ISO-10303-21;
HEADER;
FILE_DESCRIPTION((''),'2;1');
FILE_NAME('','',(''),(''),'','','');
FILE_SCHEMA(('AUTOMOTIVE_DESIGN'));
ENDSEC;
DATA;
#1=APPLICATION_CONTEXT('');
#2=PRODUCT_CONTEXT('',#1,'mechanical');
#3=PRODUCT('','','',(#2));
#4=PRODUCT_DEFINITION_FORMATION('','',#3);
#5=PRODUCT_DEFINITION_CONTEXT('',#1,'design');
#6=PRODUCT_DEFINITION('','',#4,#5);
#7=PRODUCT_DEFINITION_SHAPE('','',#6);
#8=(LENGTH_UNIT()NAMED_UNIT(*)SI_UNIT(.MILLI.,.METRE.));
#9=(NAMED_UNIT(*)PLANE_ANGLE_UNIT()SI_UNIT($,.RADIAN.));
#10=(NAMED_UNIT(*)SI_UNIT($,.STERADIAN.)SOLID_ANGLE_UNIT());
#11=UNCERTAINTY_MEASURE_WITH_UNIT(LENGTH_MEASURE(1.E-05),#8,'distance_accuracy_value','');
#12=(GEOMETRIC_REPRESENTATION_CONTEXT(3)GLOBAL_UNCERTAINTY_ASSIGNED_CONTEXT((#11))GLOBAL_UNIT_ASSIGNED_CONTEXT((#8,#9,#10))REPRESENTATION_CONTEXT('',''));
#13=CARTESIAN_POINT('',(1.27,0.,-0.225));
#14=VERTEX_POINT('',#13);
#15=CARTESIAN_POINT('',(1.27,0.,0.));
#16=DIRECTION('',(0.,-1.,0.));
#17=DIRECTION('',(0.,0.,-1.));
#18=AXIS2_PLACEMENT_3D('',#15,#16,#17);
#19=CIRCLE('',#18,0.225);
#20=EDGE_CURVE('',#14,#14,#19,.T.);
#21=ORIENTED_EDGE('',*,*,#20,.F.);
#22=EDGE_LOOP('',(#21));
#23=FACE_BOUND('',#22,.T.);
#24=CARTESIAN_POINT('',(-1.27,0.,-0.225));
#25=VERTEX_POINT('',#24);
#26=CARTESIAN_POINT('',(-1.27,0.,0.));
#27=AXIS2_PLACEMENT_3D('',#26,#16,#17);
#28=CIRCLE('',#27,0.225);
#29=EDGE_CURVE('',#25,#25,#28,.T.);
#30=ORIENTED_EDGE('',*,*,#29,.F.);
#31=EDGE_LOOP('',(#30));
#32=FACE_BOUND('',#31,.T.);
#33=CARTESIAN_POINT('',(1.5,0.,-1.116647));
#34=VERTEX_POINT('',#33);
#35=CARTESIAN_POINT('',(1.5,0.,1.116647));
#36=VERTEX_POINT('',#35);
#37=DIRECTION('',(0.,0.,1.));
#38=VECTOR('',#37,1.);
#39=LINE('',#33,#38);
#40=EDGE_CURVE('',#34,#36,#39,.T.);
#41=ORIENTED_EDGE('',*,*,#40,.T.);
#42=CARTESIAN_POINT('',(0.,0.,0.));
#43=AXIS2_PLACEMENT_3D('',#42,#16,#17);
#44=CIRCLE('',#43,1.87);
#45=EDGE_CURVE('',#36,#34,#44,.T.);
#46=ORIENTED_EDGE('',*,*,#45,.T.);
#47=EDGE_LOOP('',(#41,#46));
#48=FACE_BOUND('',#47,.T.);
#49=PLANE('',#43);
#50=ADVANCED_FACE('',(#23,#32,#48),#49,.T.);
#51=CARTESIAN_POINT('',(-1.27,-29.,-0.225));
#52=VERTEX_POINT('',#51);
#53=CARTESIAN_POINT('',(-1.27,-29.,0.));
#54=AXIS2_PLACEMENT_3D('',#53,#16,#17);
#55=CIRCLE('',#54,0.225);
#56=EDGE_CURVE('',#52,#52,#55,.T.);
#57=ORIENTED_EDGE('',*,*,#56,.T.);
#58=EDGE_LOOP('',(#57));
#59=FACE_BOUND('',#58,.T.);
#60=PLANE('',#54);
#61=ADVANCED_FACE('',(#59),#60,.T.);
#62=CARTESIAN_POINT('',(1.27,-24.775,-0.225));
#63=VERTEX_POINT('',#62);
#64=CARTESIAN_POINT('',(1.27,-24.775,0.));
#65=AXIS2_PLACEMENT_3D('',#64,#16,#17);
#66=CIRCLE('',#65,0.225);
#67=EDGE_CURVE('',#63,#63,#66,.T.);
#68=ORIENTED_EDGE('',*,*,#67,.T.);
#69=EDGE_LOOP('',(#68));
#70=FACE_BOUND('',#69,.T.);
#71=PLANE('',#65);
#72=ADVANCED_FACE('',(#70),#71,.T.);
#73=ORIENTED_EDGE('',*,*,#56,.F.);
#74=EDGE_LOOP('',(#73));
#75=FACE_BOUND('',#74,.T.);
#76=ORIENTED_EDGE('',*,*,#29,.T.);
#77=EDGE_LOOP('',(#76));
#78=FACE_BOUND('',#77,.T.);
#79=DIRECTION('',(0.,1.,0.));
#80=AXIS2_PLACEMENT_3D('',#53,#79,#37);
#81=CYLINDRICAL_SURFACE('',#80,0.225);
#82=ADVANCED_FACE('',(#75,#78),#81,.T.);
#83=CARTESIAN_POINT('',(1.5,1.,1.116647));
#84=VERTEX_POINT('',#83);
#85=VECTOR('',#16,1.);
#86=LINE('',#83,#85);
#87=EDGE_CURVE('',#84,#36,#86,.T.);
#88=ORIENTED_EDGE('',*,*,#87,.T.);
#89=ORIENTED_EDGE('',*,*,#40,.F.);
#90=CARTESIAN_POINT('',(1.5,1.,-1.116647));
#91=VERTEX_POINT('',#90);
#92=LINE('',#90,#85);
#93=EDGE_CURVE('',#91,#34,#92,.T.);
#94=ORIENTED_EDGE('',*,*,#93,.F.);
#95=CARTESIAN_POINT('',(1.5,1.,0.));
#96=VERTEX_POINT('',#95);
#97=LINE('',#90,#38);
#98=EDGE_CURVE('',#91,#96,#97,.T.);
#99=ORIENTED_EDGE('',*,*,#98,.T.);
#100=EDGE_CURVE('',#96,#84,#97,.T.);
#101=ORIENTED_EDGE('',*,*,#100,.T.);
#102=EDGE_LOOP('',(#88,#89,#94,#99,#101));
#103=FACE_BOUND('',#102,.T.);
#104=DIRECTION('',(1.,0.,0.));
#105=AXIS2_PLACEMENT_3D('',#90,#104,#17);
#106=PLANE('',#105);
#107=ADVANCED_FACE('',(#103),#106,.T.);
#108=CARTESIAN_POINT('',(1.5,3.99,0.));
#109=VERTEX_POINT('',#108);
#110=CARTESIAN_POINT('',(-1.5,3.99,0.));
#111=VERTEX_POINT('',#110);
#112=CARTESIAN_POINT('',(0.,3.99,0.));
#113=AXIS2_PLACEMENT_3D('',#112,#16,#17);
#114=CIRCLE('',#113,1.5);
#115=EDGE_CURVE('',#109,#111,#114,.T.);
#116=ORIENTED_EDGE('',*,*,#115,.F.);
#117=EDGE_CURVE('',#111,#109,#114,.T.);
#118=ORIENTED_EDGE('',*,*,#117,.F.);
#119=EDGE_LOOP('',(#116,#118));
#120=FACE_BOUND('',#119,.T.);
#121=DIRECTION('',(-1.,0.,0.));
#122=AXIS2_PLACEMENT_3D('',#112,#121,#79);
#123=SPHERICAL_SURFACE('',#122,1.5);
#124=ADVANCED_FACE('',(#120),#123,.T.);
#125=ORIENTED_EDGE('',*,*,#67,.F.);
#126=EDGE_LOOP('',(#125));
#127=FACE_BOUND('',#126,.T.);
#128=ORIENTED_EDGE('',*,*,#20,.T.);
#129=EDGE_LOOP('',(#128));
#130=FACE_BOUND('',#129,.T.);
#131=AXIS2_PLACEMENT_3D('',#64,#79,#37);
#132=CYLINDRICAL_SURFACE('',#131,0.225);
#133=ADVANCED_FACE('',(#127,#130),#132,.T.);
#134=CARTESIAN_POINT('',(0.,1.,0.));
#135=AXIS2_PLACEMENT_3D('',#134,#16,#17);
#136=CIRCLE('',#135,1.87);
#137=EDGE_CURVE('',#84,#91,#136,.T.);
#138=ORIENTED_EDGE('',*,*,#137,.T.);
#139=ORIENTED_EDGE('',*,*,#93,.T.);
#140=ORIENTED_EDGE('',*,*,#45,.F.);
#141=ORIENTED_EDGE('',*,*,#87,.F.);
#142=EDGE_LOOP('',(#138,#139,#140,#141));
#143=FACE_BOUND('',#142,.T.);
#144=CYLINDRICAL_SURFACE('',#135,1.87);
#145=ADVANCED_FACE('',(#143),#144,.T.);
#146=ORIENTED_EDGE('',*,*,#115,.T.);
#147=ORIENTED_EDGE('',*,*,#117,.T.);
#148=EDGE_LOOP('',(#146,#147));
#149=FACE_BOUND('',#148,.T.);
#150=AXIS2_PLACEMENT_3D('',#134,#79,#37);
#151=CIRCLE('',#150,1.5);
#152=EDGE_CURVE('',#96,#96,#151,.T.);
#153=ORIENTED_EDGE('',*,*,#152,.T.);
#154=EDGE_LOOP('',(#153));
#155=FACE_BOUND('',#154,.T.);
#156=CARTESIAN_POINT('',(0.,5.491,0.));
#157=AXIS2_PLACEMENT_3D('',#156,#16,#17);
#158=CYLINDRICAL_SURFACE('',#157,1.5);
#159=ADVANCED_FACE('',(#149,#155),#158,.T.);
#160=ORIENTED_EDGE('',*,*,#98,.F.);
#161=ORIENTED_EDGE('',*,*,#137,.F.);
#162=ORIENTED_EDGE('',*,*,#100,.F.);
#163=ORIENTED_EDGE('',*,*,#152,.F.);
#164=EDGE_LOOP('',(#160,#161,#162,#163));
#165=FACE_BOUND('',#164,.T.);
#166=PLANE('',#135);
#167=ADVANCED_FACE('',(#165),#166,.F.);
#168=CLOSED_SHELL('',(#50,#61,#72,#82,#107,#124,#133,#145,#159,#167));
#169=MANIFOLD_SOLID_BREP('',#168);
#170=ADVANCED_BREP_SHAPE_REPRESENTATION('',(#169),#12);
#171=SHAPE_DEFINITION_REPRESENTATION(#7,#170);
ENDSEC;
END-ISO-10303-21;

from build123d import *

# Parameters (mm, degrees)
RESSALTO_EXTRUS_O1_DEPTH = 1
ESBO_O3_R                = 0.225
RESSALTO_EXTRUS_O3_DEPTH = 29
ESBO_O4_R                = 0.225
RESSALTO_EXTRUS_O4_DEPTH = 24.775


# Read off the part's stored shape, not the designer's step: Ressalto-extrusão2
with BuildPart() as part:
    # Esboço1 → Ressalto-extrusão1 (new body)
    with BuildSketch(Plane.XZ):
        with BuildLine():
            Line((1.5, -1.116646766), (1.5, 1.116646766))
            ThreePointArc((1.5, 1.116646766), (-1.87, 0), (1.5, -1.116646766))
        make_face()
    extrude(amount=-RESSALTO_EXTRUS_O1_DEPTH)

    # Ressalto-extrusão2 outline → Ressalto-extrusão2 (revolve)
    with BuildSketch(Plane.XY):
        with BuildLine():
            Line((1.5, 1), (1.5, 3.99))
            ThreePointArc((1.5, 3.99), (1.060660172, 5.050660172), (0, 5.49))
            Line((0, 5.49), (0, 1))
            Line((0, 1), (1.5, 1))
        make_face()
    revolve(axis=Axis((0, 0, 0), (0, 1, 0)))

    # Esboço3 → Ressalto-extrusão3 (add)
    with BuildSketch(Plane.XZ):
        with Locations(Location((-1.27, 0, 0), (0, 0, 270))):
            Circle(ESBO_O3_R)
    extrude(amount=RESSALTO_EXTRUS_O3_DEPTH)

    # Esboço4 → Ressalto-extrusão4 (add)
    with BuildSketch(Plane.XZ):
        with Locations(Location((1.27, 0, 0), (0, 0, 270))):
            Circle(ESBO_O4_R)
    extrude(amount=RESSALTO_EXTRUS_O4_DEPTH)


solid = part.part
